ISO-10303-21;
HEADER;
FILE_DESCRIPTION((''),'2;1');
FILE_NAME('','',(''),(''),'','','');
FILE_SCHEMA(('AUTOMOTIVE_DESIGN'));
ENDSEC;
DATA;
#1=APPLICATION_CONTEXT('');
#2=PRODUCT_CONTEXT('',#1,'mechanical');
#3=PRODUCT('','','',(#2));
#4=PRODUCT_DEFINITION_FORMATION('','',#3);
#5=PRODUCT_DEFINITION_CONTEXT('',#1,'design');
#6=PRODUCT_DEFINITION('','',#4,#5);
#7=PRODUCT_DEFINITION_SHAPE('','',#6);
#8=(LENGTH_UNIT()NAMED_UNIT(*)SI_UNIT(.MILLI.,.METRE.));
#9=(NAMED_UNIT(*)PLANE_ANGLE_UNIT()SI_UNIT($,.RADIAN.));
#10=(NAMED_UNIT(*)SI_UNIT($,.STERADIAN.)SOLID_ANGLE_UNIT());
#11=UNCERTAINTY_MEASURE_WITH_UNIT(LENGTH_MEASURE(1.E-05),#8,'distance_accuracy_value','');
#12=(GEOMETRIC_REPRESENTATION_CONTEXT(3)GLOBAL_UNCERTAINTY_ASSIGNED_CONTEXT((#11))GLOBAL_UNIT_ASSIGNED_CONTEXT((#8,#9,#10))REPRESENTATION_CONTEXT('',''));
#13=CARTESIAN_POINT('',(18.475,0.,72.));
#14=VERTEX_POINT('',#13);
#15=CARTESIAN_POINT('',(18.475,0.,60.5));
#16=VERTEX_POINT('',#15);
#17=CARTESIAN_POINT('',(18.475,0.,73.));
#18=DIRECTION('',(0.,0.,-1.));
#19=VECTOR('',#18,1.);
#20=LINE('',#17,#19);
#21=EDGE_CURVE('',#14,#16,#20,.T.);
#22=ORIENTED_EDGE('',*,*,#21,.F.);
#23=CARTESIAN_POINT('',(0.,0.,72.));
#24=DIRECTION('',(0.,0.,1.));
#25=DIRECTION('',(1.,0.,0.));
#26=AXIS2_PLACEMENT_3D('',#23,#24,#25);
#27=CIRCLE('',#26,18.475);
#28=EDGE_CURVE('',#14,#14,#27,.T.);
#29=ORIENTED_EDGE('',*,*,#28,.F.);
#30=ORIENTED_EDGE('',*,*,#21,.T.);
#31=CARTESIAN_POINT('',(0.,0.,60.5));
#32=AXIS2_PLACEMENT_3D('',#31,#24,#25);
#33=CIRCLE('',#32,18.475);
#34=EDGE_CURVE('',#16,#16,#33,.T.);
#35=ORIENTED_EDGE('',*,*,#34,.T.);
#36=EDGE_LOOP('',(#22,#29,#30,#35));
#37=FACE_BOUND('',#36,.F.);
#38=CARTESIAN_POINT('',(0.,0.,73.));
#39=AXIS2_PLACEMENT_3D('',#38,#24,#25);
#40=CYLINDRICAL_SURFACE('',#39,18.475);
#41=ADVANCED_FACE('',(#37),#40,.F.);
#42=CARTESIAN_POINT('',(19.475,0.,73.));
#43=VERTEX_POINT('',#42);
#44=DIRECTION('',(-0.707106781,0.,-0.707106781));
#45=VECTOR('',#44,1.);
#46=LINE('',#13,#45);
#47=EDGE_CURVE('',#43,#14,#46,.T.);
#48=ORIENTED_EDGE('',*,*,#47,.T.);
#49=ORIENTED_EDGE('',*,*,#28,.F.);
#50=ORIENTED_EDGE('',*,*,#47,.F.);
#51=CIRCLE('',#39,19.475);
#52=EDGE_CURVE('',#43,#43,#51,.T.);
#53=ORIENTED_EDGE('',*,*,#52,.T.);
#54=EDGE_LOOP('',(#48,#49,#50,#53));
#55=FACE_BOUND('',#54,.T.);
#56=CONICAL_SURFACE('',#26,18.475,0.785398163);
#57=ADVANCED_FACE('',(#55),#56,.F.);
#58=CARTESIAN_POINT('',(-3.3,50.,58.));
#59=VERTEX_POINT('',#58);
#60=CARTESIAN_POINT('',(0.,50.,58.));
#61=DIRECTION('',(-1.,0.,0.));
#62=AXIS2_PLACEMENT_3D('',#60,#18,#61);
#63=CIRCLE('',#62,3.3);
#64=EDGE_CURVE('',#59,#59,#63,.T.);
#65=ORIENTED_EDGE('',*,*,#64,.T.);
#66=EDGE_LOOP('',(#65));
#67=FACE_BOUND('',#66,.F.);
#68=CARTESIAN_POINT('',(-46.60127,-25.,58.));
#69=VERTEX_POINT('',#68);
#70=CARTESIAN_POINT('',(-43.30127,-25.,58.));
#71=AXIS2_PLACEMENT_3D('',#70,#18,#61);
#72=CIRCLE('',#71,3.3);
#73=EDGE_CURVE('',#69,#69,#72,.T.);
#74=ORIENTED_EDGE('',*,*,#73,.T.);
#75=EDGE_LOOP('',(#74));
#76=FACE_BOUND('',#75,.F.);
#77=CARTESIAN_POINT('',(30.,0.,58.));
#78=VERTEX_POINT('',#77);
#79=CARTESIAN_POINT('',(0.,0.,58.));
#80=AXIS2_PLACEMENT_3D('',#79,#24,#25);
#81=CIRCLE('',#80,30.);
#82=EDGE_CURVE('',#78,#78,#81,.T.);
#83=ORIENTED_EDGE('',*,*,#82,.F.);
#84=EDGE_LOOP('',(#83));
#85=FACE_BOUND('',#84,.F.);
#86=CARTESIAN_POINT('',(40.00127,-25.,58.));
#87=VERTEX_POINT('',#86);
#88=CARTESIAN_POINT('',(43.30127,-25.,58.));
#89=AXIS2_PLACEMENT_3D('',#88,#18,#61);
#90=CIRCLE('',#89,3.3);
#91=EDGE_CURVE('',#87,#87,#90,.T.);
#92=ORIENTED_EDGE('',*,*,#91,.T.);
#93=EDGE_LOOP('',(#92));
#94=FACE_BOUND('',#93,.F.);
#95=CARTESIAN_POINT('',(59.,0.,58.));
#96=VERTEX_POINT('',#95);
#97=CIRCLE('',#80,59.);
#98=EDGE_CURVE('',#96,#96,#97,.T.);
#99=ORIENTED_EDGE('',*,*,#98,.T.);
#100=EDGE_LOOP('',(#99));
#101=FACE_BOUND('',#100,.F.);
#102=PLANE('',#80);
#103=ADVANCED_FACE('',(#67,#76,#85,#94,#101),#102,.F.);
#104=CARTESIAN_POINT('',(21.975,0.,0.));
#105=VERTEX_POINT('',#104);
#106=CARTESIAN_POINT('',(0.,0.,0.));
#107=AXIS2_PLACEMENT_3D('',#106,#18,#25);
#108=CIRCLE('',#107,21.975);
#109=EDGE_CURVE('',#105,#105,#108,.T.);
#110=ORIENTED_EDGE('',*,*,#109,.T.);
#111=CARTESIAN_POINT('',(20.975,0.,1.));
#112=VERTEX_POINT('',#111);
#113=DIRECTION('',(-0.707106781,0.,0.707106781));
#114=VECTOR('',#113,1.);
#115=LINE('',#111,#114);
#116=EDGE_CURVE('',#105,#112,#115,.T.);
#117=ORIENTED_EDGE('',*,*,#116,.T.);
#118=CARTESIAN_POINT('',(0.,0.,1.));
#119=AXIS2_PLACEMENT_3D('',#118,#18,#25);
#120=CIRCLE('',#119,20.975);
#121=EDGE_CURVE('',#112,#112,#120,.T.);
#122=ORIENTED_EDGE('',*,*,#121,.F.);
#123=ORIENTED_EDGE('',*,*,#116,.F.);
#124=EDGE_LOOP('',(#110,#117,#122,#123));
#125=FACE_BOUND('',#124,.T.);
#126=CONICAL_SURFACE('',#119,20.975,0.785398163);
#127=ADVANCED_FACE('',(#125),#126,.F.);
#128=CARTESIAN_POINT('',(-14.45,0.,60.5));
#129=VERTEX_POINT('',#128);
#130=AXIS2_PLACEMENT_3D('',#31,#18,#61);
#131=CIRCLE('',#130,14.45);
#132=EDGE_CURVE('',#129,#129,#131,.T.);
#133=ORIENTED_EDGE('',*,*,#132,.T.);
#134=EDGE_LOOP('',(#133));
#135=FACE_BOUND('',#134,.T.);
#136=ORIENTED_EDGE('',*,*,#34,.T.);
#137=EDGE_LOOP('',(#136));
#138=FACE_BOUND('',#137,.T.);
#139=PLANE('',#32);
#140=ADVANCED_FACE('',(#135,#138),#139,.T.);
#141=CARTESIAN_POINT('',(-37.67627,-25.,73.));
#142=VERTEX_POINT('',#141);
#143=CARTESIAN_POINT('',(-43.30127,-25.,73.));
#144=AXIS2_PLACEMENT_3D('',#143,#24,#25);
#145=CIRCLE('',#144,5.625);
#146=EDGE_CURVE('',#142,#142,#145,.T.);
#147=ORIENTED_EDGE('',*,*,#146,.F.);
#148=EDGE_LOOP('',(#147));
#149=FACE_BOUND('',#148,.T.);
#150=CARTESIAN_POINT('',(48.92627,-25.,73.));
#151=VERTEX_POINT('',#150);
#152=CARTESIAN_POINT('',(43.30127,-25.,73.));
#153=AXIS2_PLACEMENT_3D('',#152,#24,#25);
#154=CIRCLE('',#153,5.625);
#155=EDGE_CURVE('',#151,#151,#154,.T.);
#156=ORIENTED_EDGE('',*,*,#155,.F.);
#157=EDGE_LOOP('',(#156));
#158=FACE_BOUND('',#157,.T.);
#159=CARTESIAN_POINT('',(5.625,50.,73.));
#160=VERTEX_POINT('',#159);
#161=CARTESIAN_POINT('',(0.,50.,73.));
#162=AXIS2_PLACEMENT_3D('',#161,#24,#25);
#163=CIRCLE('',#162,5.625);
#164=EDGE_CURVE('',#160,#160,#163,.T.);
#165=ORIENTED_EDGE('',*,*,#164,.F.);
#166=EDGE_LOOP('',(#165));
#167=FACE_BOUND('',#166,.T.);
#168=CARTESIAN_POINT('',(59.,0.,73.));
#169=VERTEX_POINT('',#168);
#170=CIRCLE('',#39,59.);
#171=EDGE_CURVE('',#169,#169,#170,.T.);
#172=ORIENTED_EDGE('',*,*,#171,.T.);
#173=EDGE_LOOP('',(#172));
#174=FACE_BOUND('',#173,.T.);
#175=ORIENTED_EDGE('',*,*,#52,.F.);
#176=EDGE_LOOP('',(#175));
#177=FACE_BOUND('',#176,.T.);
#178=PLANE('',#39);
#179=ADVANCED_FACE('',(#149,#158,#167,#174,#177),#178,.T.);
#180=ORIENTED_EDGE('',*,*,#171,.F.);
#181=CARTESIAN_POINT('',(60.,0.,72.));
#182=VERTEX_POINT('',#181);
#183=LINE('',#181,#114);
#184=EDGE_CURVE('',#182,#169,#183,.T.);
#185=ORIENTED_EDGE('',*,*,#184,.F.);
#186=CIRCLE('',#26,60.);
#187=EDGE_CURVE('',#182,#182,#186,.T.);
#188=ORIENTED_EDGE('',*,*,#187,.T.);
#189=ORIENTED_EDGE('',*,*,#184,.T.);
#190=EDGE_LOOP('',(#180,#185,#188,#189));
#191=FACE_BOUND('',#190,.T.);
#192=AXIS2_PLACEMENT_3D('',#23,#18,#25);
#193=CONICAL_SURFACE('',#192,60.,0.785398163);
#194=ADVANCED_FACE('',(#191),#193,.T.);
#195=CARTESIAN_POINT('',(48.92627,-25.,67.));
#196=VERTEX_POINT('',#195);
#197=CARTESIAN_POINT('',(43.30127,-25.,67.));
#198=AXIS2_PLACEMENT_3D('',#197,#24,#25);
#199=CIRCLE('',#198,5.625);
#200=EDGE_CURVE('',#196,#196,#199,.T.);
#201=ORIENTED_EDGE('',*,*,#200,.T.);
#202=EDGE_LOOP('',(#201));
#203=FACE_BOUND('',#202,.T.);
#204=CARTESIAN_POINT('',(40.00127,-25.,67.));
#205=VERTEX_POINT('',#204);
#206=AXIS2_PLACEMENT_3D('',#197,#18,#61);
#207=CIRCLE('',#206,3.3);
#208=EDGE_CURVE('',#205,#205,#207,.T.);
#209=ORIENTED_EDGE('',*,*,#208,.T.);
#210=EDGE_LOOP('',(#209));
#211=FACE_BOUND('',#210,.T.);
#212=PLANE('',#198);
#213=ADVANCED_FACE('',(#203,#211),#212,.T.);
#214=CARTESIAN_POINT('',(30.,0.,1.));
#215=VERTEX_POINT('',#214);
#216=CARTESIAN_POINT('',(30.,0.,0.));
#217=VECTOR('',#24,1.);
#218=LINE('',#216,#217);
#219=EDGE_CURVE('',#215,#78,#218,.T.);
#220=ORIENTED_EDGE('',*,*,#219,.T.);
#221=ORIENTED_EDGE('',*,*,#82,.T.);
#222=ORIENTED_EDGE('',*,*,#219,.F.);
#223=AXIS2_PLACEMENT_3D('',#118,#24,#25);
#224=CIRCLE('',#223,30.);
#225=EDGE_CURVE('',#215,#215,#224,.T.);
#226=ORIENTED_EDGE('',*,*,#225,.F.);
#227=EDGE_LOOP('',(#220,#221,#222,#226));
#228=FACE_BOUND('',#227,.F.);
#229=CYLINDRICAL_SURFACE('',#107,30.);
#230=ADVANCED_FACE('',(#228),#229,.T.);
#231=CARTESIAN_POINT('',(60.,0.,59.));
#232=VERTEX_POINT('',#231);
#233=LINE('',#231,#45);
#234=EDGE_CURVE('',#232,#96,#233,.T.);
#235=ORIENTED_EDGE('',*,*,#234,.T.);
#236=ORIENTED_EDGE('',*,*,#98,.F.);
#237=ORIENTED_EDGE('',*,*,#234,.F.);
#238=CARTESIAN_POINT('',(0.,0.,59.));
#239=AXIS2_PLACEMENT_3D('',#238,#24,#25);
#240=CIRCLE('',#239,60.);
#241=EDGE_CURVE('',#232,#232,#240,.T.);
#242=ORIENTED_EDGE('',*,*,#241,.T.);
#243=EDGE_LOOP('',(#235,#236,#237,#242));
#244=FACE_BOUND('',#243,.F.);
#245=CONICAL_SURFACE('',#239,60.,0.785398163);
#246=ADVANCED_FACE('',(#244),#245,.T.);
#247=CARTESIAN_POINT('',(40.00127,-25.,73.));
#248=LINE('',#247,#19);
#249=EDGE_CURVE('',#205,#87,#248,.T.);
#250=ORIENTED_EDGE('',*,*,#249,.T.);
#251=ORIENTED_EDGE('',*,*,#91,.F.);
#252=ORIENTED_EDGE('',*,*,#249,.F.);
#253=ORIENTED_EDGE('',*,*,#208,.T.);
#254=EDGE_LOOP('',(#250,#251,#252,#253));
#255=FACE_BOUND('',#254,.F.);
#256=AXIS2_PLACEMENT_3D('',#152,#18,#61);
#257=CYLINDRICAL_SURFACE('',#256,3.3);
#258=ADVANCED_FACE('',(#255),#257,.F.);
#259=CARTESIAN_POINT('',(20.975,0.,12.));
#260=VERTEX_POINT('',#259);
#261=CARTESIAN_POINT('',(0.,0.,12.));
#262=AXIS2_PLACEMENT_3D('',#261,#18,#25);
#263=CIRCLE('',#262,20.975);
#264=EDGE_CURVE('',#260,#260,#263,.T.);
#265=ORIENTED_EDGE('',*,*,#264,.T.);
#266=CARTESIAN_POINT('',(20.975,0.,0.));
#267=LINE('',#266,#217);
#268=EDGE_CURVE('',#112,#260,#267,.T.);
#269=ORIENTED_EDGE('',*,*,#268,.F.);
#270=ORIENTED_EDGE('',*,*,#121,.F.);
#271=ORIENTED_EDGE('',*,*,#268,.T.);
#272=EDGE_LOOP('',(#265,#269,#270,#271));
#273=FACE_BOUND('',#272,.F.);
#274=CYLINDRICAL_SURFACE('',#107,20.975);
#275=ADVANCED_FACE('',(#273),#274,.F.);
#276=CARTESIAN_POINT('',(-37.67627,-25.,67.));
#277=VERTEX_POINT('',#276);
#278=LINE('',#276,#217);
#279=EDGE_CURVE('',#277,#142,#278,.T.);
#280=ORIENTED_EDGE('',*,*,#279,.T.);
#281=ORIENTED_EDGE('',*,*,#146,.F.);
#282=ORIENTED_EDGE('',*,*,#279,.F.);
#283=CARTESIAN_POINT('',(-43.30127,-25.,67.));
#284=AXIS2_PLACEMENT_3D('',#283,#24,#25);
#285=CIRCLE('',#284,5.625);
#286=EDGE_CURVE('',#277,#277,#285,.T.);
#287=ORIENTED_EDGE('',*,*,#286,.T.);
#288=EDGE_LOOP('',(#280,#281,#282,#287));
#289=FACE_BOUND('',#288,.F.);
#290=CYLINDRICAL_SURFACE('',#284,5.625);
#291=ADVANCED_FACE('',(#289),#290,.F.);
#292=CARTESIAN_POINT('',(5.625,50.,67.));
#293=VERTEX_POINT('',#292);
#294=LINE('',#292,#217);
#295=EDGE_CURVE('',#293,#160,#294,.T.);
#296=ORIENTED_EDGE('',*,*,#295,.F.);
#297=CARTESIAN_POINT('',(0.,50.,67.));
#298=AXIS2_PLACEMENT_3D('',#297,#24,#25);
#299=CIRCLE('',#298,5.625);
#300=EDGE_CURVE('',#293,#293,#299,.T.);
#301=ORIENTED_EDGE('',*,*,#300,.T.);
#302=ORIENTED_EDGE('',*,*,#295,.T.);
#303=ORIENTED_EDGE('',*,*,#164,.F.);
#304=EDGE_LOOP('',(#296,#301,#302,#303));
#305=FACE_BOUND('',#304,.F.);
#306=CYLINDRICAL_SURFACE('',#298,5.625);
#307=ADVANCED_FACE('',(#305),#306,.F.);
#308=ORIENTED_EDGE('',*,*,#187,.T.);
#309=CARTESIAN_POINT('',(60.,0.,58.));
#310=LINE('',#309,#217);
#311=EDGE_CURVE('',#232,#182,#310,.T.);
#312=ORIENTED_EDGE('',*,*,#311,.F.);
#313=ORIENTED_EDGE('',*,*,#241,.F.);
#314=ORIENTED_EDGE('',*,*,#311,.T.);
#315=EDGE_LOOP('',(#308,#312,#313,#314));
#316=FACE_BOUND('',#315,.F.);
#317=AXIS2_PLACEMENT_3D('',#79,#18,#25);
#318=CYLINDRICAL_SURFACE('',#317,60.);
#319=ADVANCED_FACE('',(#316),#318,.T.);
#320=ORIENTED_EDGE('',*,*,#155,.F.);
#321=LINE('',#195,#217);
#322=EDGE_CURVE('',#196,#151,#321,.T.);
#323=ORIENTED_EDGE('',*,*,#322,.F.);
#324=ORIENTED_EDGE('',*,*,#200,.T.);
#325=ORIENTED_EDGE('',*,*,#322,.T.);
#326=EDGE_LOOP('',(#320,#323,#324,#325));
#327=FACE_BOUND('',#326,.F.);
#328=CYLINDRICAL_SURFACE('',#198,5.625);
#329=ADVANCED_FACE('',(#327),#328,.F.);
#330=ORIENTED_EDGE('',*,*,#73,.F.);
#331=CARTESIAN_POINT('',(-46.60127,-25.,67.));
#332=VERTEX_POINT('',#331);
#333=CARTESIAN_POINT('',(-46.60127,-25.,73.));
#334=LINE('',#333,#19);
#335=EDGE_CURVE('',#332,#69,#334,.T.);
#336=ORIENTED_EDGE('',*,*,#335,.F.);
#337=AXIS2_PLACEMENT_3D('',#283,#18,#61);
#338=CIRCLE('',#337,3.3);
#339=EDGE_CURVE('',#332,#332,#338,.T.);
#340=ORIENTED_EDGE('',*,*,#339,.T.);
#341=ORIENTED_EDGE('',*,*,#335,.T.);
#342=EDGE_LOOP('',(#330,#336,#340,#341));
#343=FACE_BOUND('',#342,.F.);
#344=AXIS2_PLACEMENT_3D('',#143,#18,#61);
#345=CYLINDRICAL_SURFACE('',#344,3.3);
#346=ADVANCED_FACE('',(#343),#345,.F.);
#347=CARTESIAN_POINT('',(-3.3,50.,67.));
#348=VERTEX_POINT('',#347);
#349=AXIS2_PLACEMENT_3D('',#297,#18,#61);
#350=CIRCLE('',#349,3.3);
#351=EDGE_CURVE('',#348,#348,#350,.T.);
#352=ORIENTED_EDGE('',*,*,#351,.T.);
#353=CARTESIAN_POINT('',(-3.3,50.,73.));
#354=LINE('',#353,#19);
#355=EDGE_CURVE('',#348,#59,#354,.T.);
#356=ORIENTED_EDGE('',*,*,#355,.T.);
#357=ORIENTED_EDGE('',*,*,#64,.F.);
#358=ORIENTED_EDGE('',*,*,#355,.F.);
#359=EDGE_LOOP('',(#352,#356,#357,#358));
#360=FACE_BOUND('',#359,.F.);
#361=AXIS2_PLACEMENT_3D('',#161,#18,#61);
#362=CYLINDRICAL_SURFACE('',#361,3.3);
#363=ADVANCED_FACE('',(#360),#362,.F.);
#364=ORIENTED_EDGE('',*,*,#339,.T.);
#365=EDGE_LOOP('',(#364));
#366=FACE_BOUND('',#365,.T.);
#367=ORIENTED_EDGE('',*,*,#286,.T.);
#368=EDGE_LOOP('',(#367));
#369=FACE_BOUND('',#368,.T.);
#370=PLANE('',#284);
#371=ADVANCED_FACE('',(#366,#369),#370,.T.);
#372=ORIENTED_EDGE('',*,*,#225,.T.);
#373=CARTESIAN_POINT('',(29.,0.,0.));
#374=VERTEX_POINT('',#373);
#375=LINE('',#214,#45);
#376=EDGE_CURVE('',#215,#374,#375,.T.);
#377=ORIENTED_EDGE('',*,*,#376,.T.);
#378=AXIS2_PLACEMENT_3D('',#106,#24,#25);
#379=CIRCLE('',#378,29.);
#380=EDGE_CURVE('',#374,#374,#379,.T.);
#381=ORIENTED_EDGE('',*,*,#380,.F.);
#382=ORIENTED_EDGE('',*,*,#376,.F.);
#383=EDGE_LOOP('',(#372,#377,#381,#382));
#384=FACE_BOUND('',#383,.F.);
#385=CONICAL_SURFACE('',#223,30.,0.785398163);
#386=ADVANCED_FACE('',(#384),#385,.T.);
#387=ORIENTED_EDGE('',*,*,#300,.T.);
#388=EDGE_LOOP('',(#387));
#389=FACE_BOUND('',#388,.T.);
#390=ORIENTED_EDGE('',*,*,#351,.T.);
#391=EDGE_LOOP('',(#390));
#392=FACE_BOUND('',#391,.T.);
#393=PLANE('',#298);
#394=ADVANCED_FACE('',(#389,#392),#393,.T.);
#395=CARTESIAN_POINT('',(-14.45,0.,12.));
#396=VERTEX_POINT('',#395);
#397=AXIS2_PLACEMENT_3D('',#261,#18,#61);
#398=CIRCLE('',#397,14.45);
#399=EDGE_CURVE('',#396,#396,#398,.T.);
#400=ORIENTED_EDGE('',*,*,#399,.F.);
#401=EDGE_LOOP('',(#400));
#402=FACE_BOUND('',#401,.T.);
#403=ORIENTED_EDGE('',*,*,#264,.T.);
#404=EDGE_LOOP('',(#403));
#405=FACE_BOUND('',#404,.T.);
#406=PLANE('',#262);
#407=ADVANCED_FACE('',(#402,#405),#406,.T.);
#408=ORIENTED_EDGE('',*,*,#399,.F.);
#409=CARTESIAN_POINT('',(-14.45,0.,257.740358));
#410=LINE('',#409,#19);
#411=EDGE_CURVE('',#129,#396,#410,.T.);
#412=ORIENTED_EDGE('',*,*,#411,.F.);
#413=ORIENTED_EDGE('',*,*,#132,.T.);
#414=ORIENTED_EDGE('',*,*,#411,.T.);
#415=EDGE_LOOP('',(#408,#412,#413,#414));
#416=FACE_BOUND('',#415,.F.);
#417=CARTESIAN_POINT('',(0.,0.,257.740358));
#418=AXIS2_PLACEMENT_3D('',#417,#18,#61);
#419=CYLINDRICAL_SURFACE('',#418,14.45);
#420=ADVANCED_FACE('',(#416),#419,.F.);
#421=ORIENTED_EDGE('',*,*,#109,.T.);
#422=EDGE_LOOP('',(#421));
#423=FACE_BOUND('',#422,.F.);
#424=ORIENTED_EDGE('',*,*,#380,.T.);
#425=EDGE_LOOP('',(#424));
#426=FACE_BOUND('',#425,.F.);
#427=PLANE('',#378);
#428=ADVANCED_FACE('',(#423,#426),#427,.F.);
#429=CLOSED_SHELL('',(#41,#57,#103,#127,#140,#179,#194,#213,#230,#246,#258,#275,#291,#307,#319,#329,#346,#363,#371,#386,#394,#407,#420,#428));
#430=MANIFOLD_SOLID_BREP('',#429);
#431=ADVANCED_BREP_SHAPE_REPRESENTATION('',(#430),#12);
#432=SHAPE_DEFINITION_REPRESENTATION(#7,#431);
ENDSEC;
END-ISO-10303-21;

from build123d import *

# Parameters (mm, degrees)
F0_R           = 30
F1_DEPTH       = 58
F2_R           = 60
F2_R_2         = 30
F3_DEPTH       = 15
F4_R           = 18.475
F5_DEPTH       = 12.5
F6_D           = 6.6
F6_CBORE_D     = 11.25
F6_CBORE_DEPTH = 6
F7_R           = 20.975
F8_DEPTH       = 12
F10_D          = 28.9
F11_SIZE       = 1


# Not quite as in the source:
# - a feature names something its author has since deleted; it is built from what else it names


with BuildPart() as f1:
    # F0 (on Top) → F1 (new body)
    with BuildSketch(Plane.XY):
        Circle(F0_R)
    extrude(amount=F1_DEPTH)

    # F2 (on face) → F3 (join)
    with BuildSketch(Plane.XY.offset(58)):
        Circle(F2_R)
        Circle(F2_R_2, mode=Mode.SUBTRACT)
        Circle(F2_R_2)
    extrude(amount=F3_DEPTH)

    # F4 (on face) → F5 (cut)
    with BuildSketch(Plane.XY.offset(73)):
        Circle(F4_R)
    extrude(amount=-F5_DEPTH, mode=Mode.SUBTRACT)

    # F6 (through all)
    with Locations(Plane.XY.offset(73)):
        with Locations((-43.3012701892, -25), (0, 50), (43.3012701892, -25)):
            CounterBoreHole(F6_D / 2, F6_CBORE_D / 2, F6_CBORE_DEPTH)

    # F7 (on face) → F8 (cut)
    with BuildSketch(Plane(origin=(0, 0, 0), x_dir=(1, 0, 0), z_dir=(0, 0, -1))):
        Circle(F7_R)
    extrude(amount=-F8_DEPTH, mode=Mode.SUBTRACT)

    # F10 (through all)
    with Locations(Plane.XY.offset(73)):
        with Locations((0, 0)):
            Hole(F10_D / 2)

    # F11
    f11_edges = [f1.edges().sort_by_distance(p)[0] for p in [
        (-60, 0, 73),
        (-60, 0, 58),
        (-30, 0, 0),
        (-20.975, 0, 0),
        (-18.475, 0, 73),
    ]]
    chamfer(f11_edges, length=F11_SIZE)


solid = f1.part
